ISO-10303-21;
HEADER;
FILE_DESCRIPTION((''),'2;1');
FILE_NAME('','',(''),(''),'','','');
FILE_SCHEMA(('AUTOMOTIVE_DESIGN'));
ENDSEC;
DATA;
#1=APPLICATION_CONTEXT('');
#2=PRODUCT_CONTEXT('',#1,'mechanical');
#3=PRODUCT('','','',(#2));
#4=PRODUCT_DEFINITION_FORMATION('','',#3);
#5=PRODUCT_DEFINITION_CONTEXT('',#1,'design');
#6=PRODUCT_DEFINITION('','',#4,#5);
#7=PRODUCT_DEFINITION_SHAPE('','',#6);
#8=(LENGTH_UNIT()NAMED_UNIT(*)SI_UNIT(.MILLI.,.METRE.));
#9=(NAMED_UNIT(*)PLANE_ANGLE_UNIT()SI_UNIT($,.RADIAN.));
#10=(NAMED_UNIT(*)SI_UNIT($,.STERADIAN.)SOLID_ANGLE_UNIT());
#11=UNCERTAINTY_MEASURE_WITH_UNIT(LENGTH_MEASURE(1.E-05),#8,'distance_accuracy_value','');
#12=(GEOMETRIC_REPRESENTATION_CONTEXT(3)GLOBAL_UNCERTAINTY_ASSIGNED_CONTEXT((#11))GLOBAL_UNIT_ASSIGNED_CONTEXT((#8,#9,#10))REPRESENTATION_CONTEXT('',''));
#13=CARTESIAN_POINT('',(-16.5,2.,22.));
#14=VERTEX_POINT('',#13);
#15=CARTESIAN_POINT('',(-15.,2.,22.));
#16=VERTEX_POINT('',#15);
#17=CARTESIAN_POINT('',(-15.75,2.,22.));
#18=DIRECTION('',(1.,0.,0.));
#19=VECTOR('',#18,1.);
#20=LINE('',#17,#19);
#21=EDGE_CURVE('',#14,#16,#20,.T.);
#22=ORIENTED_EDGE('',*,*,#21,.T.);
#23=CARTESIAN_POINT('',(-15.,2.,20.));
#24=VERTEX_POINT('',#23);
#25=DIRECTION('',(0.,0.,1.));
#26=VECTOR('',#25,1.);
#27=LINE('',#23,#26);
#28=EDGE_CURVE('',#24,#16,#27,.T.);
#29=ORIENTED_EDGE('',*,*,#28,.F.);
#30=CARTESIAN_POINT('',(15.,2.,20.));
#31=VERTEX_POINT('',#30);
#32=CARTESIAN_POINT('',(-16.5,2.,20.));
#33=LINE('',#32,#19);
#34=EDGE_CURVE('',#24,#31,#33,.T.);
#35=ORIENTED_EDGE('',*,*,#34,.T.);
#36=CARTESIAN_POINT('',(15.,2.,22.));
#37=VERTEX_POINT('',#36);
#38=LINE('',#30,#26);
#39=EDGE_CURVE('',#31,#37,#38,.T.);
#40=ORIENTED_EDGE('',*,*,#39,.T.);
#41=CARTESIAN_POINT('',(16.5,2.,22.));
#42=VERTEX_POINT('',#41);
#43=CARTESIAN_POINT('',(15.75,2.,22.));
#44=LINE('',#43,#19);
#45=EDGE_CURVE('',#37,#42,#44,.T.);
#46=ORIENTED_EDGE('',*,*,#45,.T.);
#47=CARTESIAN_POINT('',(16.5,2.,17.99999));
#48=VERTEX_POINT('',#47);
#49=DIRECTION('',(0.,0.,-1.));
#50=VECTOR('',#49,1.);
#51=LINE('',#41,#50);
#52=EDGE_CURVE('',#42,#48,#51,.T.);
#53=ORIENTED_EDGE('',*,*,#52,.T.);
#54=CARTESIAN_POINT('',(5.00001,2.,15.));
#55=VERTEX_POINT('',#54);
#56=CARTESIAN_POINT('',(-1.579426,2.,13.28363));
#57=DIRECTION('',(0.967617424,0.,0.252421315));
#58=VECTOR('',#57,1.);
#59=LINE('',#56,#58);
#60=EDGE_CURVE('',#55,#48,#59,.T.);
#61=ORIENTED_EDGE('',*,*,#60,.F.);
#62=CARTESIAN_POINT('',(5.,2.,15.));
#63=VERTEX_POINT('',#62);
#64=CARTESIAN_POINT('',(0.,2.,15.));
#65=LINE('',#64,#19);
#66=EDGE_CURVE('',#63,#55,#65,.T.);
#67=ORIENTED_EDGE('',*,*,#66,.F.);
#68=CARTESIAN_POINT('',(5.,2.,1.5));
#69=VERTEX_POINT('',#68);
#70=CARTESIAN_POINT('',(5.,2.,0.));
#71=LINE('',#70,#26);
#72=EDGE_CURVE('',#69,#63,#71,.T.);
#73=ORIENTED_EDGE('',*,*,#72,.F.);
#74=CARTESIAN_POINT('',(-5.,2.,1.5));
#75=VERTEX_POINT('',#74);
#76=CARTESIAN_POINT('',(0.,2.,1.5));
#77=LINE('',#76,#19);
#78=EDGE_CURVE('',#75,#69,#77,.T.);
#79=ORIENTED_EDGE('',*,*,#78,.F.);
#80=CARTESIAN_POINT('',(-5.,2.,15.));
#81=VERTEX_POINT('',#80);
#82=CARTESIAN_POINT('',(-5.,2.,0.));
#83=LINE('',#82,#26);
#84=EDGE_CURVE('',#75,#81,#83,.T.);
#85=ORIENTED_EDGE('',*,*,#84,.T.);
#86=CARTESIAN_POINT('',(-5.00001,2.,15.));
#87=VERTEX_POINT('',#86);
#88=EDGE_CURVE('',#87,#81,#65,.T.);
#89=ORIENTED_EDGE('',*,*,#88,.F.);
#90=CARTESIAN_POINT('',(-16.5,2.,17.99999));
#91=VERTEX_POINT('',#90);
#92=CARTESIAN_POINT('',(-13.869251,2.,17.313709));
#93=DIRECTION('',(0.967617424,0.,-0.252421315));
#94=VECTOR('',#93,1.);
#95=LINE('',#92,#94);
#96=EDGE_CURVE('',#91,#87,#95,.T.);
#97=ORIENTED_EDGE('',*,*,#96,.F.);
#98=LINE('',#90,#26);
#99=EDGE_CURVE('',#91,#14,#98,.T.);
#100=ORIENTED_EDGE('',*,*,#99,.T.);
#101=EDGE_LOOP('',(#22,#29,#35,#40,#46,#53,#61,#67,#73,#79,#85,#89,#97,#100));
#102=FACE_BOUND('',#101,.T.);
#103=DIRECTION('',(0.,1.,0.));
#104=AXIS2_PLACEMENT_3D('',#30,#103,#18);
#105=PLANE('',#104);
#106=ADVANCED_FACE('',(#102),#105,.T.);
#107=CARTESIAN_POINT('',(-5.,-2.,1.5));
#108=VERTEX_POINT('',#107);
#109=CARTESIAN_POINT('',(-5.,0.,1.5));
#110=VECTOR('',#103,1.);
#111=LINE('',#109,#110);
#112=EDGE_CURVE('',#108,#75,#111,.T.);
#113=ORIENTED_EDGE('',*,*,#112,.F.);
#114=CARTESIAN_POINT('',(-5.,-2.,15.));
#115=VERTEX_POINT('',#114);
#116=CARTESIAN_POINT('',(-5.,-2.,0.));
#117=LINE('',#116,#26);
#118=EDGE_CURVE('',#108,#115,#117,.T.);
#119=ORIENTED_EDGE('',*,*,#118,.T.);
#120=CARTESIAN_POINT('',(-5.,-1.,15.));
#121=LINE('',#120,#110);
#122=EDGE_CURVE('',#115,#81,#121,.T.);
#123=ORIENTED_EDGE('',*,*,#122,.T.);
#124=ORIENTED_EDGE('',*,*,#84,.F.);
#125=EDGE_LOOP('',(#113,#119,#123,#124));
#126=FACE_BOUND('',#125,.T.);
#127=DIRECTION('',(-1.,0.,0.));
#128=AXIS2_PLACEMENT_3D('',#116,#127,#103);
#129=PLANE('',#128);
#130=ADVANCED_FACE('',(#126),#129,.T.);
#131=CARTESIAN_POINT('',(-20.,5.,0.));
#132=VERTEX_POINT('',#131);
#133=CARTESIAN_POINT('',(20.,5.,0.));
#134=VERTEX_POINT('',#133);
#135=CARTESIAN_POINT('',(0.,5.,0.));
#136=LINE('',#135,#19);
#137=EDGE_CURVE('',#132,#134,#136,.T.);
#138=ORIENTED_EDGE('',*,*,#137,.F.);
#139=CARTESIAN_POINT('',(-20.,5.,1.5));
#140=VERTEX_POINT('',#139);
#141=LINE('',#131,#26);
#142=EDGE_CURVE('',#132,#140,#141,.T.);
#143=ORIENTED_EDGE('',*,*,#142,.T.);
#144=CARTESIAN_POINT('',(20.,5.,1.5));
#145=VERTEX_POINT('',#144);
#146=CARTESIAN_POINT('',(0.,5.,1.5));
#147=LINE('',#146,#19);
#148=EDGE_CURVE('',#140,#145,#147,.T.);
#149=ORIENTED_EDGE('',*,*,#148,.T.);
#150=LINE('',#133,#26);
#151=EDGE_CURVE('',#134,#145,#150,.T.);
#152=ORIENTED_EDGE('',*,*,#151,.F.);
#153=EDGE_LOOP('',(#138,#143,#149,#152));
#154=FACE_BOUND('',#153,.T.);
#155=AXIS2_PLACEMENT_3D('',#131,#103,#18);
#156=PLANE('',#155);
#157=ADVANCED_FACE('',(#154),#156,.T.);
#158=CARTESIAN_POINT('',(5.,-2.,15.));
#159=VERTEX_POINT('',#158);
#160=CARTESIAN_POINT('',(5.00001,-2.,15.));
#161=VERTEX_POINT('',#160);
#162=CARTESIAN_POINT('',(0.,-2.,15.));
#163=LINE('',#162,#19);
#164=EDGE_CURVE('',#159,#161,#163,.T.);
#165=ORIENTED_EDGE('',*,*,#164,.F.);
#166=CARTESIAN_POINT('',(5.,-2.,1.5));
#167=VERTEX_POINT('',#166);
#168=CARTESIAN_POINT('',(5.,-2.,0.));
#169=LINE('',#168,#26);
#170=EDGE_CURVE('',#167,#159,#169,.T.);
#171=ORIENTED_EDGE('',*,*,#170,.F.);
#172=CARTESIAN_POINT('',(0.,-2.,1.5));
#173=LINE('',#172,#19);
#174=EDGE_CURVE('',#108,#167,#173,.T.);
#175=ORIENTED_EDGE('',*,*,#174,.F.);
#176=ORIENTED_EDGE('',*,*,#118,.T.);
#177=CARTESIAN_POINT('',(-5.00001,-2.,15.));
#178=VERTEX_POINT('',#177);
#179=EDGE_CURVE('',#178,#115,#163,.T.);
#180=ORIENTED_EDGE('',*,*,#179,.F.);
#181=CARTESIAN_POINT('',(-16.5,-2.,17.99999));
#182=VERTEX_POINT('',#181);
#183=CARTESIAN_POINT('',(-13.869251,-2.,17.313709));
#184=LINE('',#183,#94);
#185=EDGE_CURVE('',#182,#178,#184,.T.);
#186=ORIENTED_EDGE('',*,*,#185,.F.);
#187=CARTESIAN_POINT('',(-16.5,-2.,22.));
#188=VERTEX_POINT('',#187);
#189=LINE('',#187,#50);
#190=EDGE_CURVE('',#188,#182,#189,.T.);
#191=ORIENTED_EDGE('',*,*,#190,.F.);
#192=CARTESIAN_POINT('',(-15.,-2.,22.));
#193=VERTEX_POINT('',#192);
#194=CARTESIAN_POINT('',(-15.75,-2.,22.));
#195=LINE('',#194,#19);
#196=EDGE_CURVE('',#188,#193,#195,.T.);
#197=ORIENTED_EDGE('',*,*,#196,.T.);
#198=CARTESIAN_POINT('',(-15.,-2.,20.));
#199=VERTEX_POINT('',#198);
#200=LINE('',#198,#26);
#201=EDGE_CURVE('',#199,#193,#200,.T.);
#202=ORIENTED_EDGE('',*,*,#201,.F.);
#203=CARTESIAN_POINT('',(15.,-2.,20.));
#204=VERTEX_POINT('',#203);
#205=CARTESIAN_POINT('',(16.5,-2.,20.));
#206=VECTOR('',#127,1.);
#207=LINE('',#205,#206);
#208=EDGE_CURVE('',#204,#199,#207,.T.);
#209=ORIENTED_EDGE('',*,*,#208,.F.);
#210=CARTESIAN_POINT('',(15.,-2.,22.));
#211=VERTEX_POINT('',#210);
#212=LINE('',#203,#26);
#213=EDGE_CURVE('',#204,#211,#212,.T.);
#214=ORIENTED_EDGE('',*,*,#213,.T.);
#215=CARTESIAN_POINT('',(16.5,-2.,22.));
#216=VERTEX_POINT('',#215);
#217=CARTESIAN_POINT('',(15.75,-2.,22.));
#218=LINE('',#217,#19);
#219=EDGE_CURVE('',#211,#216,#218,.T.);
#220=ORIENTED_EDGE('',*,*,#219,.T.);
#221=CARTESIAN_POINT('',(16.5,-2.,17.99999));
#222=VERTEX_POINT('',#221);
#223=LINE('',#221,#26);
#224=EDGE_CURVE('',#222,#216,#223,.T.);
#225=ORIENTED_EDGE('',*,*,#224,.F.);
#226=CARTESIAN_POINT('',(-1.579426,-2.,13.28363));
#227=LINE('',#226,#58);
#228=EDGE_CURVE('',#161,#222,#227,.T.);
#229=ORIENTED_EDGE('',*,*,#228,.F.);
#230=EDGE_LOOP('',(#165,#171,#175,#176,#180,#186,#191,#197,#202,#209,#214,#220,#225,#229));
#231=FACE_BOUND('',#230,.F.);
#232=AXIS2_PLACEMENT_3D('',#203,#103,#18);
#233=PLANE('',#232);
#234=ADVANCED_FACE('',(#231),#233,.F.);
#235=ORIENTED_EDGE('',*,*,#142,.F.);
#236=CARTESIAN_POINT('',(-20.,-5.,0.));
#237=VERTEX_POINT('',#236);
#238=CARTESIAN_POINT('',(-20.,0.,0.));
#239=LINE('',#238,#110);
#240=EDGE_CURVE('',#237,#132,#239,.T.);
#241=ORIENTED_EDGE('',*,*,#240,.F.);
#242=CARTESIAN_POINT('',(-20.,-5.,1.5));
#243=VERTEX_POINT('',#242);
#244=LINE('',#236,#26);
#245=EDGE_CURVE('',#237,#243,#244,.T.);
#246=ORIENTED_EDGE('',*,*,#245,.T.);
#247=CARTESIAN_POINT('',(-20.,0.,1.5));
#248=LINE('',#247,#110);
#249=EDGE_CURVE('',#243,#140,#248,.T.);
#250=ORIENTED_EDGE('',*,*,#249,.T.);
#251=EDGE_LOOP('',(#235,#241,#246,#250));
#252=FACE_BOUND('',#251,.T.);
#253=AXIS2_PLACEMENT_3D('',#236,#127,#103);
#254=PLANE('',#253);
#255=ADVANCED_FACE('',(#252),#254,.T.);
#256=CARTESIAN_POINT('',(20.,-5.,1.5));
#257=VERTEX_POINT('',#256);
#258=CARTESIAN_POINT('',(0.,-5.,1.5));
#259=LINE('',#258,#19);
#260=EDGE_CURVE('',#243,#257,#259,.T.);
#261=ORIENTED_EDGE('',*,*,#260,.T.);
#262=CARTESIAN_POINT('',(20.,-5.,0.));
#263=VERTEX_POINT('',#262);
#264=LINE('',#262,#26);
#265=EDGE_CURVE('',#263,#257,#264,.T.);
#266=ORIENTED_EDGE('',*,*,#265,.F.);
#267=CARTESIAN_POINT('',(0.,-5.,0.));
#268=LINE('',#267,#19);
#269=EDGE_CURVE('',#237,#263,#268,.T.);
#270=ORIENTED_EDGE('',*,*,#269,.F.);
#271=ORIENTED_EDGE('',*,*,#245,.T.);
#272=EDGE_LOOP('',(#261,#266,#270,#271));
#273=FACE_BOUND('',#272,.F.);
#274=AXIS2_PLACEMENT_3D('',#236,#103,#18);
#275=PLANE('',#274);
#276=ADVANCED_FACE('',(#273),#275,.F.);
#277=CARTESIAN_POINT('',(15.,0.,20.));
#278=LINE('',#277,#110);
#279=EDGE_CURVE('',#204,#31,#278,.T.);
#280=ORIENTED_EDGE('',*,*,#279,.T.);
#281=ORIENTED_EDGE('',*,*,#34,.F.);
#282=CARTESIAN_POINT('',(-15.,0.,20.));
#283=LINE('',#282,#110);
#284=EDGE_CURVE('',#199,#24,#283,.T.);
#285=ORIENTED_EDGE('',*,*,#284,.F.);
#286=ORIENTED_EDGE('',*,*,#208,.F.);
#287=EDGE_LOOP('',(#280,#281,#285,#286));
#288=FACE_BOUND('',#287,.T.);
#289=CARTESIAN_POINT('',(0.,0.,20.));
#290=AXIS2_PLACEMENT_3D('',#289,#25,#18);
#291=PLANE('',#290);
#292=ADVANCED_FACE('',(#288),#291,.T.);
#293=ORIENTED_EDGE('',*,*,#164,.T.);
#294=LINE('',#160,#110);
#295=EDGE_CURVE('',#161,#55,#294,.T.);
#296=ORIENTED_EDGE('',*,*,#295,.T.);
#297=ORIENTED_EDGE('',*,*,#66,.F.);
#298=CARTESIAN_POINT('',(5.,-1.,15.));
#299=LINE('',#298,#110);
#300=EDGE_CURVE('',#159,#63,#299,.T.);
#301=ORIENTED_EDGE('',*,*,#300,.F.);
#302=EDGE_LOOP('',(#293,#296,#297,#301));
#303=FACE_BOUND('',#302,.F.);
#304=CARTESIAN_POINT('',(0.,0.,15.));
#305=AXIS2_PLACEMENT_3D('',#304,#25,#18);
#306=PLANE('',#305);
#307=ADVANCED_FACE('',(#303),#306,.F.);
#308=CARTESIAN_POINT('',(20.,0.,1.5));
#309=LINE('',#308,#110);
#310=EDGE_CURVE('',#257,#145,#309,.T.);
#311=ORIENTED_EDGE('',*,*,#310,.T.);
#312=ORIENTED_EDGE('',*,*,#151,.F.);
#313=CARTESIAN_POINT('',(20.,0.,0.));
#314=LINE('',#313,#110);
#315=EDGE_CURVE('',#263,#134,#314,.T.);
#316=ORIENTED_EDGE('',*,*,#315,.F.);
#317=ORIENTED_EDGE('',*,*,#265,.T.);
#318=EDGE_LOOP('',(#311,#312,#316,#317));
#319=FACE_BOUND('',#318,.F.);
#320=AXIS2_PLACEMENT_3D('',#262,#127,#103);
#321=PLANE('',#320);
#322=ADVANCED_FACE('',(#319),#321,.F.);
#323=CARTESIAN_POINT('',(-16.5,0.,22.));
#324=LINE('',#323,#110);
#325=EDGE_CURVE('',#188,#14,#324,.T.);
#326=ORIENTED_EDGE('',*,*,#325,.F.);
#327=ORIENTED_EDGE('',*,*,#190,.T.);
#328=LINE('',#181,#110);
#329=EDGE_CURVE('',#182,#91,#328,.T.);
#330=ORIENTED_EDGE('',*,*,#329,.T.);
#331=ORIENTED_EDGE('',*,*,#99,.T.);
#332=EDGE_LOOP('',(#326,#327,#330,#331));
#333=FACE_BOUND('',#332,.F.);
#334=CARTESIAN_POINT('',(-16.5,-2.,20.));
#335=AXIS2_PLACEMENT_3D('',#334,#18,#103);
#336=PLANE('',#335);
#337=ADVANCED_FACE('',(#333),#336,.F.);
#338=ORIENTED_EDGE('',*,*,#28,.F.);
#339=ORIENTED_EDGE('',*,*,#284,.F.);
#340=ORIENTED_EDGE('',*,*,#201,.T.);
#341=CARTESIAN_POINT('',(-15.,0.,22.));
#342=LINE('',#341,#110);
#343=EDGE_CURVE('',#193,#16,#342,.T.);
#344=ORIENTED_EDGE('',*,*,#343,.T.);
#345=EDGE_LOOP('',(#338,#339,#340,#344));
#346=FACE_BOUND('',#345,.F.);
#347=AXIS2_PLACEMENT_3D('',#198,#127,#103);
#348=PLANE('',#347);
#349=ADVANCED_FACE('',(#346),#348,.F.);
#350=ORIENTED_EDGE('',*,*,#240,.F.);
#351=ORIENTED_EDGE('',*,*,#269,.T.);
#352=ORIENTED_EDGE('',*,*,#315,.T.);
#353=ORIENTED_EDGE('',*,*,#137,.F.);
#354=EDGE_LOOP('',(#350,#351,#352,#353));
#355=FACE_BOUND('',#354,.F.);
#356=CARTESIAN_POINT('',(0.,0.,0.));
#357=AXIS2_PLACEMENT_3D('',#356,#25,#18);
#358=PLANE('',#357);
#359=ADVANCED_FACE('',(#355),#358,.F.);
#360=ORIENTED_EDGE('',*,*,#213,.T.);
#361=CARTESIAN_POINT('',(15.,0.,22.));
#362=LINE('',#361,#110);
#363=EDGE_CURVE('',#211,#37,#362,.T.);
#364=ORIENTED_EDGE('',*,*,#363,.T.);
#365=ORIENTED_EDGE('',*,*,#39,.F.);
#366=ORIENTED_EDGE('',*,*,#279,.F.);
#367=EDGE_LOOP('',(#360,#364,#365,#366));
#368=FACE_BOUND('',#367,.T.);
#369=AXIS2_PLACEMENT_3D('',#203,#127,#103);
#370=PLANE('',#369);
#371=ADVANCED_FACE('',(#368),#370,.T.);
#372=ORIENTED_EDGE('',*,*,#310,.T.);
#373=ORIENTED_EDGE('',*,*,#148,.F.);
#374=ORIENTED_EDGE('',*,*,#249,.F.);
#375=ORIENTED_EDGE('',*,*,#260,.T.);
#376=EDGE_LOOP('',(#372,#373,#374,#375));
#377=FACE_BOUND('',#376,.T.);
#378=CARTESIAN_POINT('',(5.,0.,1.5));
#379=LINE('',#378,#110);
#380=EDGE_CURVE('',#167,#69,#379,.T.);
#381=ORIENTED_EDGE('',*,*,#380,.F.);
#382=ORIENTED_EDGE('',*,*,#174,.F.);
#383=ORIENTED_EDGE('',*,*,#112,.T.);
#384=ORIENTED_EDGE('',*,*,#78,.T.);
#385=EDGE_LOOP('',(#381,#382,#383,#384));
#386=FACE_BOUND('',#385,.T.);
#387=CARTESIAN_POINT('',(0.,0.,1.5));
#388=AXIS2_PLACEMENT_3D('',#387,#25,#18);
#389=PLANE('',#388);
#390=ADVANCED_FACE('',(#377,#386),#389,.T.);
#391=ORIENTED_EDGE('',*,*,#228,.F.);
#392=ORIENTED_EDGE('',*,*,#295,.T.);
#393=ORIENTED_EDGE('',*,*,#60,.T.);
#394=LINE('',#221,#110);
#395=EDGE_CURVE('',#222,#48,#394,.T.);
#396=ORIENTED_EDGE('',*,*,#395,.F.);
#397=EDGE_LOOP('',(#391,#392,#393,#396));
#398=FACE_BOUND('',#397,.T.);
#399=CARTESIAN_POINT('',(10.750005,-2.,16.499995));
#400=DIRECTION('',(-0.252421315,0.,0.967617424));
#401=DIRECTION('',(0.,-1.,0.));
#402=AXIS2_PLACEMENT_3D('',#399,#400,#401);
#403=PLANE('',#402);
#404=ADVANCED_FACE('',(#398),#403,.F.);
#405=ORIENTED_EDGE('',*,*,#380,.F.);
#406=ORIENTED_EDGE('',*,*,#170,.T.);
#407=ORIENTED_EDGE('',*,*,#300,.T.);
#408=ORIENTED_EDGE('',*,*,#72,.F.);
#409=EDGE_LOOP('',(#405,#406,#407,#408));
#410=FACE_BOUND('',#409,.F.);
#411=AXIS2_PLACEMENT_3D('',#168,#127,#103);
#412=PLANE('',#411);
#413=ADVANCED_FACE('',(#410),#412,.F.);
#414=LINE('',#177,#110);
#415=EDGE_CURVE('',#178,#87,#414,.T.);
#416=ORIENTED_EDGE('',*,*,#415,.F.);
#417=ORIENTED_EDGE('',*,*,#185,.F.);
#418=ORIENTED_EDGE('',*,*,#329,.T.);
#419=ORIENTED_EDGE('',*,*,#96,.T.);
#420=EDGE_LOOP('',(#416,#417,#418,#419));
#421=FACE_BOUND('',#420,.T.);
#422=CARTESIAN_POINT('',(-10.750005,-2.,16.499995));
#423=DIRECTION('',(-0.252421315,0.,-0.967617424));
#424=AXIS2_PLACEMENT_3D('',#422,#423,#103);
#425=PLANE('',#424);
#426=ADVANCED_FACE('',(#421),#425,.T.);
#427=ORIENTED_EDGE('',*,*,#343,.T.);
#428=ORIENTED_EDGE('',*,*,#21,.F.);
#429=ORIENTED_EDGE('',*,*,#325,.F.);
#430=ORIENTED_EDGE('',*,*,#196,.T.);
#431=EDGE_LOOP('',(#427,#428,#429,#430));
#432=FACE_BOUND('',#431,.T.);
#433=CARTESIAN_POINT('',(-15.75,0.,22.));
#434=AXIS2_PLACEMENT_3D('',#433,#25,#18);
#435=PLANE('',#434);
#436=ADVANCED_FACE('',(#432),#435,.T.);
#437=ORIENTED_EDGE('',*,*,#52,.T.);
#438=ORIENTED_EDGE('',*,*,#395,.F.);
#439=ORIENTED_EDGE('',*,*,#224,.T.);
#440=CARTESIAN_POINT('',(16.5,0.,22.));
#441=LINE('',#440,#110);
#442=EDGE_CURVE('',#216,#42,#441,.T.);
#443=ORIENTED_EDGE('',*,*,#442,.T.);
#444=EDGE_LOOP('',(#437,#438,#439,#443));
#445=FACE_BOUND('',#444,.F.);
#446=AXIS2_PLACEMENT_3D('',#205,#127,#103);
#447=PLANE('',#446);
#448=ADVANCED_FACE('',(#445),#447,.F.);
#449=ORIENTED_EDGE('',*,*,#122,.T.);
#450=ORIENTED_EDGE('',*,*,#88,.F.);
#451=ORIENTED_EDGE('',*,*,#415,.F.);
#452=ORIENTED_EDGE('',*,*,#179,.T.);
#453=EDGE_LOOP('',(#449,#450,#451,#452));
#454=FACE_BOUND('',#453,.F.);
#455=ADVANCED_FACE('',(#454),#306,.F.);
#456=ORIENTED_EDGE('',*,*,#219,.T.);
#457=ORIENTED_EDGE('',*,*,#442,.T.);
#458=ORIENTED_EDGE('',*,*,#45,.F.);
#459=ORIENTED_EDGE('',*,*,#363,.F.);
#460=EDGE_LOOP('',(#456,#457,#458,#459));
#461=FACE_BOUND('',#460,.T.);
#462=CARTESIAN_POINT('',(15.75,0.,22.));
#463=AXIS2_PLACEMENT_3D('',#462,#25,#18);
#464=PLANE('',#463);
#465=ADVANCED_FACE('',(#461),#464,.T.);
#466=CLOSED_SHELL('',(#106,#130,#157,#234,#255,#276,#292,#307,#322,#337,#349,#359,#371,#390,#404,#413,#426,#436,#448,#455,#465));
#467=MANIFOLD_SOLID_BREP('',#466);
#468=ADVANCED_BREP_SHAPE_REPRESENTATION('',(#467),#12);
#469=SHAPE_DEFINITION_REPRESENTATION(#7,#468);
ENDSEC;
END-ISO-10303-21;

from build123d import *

# Parameters (mm, degrees)
F4_W      = 40
F4_H      = 10
F4_W_2    = 10
F4_H_2    = 4
F5_DEPTH  = 1.5
F6_DEPTH  = 20
F7_W      = 33
F7_H      = 4
F8_DEPTH  = 5
F9_SIZE2  = 2.99999
F9_SIZE   = 11.49999
F10_SIZE2 = 11.49999
F10_SIZE  = 2.99999
F11_W     = 1.5
F11_H     = 4
F12_DEPTH = 2


# Not quite as in the source:
# - a fillet or chamfer is up to 0.001 mm smaller than in the source, because OpenCascade refuses the exact size


with BuildPart() as f5:
    # F4 (on Top) → F5 (new body)
    with BuildSketch(Plane.XY):
        Rectangle(F4_W, F4_H)
        Rectangle(F4_W_2, F4_H_2, mode=Mode.SUBTRACT)
    extrude(amount=F5_DEPTH)

    # F4 (on Top) → F6 (join)
    with BuildSketch(Plane.XY):
        Rectangle(F4_W_2, F4_H_2)
    extrude(amount=F6_DEPTH)

    # F7 (on face) → F8 (join)
    with BuildSketch(Plane.XY.offset(20)):
        Rectangle(F7_W, F7_H)
    extrude(amount=-F8_DEPTH)

    # F9 (size 11.5 and 3 in the source; OpenCascade refuses exactly that, so slightly less here)
    f9_edges = [f5.edges().sort_by_distance(p)[0] for p in [
        (16.5, 0, 15),
    ]]
    f9_side = f5.faces().sort_by_distance((10.75, 0, 15))[0]
    chamfer(f9_edges, length=F9_SIZE, length2=F9_SIZE2, reference=f9_side)

    # F10 (size 3 and 11.5 in the source; OpenCascade refuses exactly that, so slightly less here)
    f10_edges = [f5.edges().sort_by_distance(p)[0] for p in [
        (-16.5, 0, 15),
    ]]
    f10_side = f5.faces().sort_by_distance((-16.5, 0, 17.5))[0]
    chamfer(f10_edges, length=F10_SIZE, length2=F10_SIZE2, reference=f10_side)

    # F11 (on face) → F12 (join)
    with BuildSketch(Plane.XY.offset(20)):
        with Locations((15.75, 0)):
            Rectangle(F11_W, F11_H)
        with Locations((-15.75, 0)):
            Rectangle(F11_W, F11_H)
    extrude(amount=F12_DEPTH)


solid = f5.part
